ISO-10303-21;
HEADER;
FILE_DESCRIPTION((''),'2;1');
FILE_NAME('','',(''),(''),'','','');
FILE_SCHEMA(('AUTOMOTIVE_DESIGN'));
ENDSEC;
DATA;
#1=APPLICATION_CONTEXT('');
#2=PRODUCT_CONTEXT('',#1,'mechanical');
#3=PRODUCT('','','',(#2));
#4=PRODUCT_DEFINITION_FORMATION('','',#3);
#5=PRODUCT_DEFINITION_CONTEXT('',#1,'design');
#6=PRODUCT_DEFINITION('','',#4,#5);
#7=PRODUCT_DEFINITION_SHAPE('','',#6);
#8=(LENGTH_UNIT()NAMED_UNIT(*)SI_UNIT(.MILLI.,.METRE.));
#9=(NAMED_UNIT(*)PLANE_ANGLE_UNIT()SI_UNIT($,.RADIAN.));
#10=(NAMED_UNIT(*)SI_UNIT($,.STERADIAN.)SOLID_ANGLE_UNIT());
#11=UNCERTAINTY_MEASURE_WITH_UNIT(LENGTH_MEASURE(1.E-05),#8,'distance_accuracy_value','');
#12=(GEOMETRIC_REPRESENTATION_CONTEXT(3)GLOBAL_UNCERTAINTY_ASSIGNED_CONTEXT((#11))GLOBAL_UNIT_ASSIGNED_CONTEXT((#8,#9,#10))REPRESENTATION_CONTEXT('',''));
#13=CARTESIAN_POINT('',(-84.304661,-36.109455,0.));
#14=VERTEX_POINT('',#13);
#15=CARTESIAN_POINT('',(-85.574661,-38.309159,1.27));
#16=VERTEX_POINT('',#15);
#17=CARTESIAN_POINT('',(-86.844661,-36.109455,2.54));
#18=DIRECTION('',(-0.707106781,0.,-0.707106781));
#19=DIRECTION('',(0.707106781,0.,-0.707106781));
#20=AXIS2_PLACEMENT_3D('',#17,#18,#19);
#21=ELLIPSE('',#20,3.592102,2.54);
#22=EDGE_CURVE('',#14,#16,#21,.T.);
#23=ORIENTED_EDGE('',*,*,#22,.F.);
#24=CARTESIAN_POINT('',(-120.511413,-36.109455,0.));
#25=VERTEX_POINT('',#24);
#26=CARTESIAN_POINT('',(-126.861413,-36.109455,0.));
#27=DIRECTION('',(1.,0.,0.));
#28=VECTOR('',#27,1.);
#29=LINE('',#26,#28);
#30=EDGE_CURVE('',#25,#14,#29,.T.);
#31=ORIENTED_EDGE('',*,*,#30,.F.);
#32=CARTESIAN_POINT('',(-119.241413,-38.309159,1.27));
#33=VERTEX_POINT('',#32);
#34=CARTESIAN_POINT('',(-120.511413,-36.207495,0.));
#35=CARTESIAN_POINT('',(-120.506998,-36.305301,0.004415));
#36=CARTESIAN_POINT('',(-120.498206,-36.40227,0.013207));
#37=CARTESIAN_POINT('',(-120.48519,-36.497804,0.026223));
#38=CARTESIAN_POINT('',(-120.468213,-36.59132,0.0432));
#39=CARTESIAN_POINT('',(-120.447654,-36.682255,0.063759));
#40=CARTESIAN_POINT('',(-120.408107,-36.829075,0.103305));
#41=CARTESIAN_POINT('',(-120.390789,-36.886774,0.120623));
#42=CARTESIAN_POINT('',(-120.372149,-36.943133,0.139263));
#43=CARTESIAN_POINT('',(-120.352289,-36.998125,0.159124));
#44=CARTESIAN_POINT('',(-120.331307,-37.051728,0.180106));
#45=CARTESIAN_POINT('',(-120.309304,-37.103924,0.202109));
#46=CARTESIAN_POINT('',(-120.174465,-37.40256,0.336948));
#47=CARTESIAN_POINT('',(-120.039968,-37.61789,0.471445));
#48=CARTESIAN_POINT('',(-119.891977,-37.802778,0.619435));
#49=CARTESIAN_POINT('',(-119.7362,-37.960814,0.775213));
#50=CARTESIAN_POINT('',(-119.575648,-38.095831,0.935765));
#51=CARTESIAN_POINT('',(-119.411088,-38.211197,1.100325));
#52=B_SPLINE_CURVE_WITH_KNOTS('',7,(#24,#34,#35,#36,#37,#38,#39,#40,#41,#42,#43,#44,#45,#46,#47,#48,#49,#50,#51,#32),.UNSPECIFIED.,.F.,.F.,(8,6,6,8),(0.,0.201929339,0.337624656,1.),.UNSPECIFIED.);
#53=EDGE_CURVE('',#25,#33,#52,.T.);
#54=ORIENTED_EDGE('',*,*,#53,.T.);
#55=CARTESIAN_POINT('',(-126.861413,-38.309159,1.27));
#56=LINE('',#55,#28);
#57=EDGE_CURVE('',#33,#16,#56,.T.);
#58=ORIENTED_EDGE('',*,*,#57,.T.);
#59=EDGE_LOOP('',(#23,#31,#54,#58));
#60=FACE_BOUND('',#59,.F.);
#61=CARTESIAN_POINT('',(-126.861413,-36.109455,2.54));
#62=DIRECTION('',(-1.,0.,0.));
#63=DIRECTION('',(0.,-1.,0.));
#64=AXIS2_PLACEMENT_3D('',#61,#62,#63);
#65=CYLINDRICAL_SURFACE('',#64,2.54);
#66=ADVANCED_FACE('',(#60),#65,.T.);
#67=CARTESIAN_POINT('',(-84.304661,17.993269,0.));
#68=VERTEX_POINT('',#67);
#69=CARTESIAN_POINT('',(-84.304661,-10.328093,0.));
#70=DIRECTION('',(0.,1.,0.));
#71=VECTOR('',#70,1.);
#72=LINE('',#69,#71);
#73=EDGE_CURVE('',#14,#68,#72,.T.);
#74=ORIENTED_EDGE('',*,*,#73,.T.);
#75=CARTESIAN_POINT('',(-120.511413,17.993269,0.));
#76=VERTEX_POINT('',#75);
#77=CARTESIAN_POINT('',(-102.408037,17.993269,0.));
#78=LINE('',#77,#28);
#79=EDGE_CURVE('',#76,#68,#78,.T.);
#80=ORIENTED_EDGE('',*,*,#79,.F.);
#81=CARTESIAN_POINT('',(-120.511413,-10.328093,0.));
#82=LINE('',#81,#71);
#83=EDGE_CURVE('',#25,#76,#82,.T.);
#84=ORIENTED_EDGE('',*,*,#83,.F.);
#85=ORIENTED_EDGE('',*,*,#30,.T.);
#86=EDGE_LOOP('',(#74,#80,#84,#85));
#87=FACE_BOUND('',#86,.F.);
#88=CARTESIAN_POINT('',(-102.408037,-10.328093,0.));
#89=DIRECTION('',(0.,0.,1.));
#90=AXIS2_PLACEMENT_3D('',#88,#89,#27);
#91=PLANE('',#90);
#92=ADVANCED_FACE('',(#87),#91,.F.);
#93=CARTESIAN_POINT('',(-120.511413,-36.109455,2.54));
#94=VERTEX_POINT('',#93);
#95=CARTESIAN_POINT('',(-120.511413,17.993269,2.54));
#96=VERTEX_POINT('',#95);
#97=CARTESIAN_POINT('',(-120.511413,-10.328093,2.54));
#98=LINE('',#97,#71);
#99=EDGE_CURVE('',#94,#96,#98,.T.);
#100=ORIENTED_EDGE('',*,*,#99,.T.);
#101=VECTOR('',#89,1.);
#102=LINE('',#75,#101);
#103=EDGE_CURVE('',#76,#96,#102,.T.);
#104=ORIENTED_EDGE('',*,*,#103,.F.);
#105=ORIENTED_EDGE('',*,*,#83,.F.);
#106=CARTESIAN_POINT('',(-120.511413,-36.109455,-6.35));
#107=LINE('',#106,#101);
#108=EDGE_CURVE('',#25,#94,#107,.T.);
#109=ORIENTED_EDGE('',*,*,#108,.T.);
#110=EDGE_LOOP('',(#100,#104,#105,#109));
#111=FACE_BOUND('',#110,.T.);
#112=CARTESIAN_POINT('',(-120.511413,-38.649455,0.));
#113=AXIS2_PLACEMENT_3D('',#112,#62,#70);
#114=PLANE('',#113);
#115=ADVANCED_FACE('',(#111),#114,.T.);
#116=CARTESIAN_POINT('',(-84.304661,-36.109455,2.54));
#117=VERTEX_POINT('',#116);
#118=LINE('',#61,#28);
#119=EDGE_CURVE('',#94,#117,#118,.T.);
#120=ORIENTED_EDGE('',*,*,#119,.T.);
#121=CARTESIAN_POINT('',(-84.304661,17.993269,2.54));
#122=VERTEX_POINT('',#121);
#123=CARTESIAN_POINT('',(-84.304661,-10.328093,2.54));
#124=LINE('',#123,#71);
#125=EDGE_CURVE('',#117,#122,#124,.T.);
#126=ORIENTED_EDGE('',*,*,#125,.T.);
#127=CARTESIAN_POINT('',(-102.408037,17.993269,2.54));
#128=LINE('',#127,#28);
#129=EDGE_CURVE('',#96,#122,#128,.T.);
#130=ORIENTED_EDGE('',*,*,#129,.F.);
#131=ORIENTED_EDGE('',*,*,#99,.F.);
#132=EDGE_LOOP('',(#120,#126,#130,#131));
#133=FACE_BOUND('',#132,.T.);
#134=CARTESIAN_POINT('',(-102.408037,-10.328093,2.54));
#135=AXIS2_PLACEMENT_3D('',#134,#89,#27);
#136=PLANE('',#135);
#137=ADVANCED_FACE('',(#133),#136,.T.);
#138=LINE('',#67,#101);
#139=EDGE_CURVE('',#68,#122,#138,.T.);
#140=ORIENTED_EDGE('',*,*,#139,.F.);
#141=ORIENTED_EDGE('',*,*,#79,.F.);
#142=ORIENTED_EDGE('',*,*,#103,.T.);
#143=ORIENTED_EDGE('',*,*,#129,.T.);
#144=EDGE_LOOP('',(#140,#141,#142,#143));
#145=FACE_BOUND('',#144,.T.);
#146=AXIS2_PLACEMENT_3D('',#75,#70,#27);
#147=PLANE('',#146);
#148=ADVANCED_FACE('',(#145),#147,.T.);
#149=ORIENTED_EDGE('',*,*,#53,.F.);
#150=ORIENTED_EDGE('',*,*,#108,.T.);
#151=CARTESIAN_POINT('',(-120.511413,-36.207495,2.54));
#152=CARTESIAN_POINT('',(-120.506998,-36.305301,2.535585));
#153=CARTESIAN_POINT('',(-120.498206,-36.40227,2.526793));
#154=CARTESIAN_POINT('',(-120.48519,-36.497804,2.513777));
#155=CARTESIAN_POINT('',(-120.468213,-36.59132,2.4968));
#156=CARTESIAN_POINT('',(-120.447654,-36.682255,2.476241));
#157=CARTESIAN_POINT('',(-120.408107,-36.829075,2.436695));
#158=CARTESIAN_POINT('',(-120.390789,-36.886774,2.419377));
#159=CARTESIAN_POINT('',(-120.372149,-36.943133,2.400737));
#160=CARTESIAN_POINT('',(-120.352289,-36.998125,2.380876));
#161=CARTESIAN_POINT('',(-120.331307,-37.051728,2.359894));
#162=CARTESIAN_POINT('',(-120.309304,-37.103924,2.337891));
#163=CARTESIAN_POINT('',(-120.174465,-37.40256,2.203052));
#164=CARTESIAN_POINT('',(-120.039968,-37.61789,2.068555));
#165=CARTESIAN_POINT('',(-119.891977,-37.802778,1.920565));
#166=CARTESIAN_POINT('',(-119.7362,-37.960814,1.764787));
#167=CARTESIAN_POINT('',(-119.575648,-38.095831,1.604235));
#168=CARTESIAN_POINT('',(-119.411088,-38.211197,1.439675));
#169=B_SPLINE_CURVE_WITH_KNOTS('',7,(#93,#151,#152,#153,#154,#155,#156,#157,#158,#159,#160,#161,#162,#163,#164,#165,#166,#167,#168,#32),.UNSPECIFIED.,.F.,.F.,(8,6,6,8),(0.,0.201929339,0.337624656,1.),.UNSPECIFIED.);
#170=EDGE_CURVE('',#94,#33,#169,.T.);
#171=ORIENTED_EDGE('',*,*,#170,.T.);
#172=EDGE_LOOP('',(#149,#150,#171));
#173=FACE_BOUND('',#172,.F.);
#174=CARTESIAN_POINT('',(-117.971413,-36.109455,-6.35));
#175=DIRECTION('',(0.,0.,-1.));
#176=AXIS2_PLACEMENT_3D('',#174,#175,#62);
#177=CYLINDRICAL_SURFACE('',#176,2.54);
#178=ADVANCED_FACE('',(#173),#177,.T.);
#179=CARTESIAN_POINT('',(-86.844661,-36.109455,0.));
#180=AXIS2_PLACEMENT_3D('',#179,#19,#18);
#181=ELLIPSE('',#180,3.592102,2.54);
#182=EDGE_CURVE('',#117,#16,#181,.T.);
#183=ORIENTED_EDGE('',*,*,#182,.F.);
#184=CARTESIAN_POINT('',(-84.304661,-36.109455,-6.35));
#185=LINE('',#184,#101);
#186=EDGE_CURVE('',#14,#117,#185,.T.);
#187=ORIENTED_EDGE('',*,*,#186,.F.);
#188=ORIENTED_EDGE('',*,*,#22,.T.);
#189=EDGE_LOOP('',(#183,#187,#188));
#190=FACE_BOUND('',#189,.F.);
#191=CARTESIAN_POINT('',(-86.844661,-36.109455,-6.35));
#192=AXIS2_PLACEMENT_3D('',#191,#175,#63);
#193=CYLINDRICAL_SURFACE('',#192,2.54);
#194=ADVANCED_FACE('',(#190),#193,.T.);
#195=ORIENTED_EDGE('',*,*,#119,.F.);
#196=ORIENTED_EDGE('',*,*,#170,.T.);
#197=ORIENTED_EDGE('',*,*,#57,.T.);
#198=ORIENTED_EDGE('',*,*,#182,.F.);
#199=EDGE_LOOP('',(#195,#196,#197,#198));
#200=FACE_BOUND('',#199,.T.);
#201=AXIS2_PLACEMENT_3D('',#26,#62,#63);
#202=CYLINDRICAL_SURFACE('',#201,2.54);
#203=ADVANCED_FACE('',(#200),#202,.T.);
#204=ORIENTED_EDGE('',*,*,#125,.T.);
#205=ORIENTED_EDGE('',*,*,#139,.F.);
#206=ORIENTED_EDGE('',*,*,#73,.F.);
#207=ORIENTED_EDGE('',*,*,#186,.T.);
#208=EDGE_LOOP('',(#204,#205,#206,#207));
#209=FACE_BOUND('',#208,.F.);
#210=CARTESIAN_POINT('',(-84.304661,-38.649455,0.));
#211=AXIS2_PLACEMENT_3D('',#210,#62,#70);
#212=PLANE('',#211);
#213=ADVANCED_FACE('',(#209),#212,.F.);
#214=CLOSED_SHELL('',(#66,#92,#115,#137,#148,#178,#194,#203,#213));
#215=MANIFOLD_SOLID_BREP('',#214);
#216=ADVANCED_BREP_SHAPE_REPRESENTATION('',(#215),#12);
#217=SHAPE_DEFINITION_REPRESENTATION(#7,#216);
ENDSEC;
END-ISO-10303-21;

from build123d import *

# Parameters (mm, degrees)
F0_W        = 36.2067520618
F0_H        = 56.6427242011
F1_DEPTH    = 2.54
F2_T1_DEPTH = 15.24
F2_T3_DEPTH = 48.9067520618


# Not quite as in the source:
# - a fillet or chamfer that OpenCascade refuses, or shapes differently, is made with other operations: its cross-section is extruded or revolved along the edge and cut away or added


with BuildPart() as f1:
    # F0 (on Top) → F1 (new body)
    with BuildSketch(Plane.XY):
        with Locations((-102.4080365896, -10.3280926123)):
            Rectangle(F0_W, F0_H)
    extrude(amount=F1_DEPTH)

    # F2: fillet of radius 2.54 on 4 edges, made by hand

    # F2_s2 → F2_t1 (cut)
    with BuildSketch(Plane.XY.offset(-6.35)):
        with BuildLine():
            ThreePointArc((-120.5114126205, -36.1094547129), (-119.7674638448, -37.9055059371), (-117.9714126205, -38.6494547129))
            Line((-117.9714126205, -38.6494547129), (-120.5114126205, -38.6494547129))
            Line((-120.5114126205, -38.6494547129), (-120.5114126205, -36.1094547129))
        make_face()
        with BuildLine():
            ThreePointArc((-86.8446605587, -38.6494547129), (-85.0486093345, -37.9055059371), (-84.3046605587, -36.1094547129))
            Line((-84.3046605587, -36.1094547129), (-84.3046605587, -38.6494547129))
            Line((-84.3046605587, -38.6494547129), (-86.8446605587, -38.6494547129))
        make_face()
    extrude(amount=F2_T1_DEPTH, mode=Mode.SUBTRACT)

    # F2_s4 → F2_t3 (cut)
    with BuildSketch(Plane.YZ.offset(-126.8614126205)):
        with BuildLine():
            ThreePointArc((-38.6494547129, 2.54), (-37.9055059371, 0.7439487758), (-36.1094547129, 0))
            Line((-36.1094547129, 0), (-38.6494547129, 0))
            Line((-38.6494547129, 0), (-38.6494547129, 2.54))
        make_face()
        with BuildLine():
            ThreePointArc((-38.6494547129, 0), (-37.9055059371, 1.7960512242), (-36.1094547129, 2.54))
            Line((-36.1094547129, 2.54), (-38.6494547129, 2.54))
            Line((-38.6494547129, 2.54), (-38.6494547129, 0))
        make_face()
    extrude(amount=F2_T3_DEPTH, mode=Mode.SUBTRACT)


solid = f1.part
